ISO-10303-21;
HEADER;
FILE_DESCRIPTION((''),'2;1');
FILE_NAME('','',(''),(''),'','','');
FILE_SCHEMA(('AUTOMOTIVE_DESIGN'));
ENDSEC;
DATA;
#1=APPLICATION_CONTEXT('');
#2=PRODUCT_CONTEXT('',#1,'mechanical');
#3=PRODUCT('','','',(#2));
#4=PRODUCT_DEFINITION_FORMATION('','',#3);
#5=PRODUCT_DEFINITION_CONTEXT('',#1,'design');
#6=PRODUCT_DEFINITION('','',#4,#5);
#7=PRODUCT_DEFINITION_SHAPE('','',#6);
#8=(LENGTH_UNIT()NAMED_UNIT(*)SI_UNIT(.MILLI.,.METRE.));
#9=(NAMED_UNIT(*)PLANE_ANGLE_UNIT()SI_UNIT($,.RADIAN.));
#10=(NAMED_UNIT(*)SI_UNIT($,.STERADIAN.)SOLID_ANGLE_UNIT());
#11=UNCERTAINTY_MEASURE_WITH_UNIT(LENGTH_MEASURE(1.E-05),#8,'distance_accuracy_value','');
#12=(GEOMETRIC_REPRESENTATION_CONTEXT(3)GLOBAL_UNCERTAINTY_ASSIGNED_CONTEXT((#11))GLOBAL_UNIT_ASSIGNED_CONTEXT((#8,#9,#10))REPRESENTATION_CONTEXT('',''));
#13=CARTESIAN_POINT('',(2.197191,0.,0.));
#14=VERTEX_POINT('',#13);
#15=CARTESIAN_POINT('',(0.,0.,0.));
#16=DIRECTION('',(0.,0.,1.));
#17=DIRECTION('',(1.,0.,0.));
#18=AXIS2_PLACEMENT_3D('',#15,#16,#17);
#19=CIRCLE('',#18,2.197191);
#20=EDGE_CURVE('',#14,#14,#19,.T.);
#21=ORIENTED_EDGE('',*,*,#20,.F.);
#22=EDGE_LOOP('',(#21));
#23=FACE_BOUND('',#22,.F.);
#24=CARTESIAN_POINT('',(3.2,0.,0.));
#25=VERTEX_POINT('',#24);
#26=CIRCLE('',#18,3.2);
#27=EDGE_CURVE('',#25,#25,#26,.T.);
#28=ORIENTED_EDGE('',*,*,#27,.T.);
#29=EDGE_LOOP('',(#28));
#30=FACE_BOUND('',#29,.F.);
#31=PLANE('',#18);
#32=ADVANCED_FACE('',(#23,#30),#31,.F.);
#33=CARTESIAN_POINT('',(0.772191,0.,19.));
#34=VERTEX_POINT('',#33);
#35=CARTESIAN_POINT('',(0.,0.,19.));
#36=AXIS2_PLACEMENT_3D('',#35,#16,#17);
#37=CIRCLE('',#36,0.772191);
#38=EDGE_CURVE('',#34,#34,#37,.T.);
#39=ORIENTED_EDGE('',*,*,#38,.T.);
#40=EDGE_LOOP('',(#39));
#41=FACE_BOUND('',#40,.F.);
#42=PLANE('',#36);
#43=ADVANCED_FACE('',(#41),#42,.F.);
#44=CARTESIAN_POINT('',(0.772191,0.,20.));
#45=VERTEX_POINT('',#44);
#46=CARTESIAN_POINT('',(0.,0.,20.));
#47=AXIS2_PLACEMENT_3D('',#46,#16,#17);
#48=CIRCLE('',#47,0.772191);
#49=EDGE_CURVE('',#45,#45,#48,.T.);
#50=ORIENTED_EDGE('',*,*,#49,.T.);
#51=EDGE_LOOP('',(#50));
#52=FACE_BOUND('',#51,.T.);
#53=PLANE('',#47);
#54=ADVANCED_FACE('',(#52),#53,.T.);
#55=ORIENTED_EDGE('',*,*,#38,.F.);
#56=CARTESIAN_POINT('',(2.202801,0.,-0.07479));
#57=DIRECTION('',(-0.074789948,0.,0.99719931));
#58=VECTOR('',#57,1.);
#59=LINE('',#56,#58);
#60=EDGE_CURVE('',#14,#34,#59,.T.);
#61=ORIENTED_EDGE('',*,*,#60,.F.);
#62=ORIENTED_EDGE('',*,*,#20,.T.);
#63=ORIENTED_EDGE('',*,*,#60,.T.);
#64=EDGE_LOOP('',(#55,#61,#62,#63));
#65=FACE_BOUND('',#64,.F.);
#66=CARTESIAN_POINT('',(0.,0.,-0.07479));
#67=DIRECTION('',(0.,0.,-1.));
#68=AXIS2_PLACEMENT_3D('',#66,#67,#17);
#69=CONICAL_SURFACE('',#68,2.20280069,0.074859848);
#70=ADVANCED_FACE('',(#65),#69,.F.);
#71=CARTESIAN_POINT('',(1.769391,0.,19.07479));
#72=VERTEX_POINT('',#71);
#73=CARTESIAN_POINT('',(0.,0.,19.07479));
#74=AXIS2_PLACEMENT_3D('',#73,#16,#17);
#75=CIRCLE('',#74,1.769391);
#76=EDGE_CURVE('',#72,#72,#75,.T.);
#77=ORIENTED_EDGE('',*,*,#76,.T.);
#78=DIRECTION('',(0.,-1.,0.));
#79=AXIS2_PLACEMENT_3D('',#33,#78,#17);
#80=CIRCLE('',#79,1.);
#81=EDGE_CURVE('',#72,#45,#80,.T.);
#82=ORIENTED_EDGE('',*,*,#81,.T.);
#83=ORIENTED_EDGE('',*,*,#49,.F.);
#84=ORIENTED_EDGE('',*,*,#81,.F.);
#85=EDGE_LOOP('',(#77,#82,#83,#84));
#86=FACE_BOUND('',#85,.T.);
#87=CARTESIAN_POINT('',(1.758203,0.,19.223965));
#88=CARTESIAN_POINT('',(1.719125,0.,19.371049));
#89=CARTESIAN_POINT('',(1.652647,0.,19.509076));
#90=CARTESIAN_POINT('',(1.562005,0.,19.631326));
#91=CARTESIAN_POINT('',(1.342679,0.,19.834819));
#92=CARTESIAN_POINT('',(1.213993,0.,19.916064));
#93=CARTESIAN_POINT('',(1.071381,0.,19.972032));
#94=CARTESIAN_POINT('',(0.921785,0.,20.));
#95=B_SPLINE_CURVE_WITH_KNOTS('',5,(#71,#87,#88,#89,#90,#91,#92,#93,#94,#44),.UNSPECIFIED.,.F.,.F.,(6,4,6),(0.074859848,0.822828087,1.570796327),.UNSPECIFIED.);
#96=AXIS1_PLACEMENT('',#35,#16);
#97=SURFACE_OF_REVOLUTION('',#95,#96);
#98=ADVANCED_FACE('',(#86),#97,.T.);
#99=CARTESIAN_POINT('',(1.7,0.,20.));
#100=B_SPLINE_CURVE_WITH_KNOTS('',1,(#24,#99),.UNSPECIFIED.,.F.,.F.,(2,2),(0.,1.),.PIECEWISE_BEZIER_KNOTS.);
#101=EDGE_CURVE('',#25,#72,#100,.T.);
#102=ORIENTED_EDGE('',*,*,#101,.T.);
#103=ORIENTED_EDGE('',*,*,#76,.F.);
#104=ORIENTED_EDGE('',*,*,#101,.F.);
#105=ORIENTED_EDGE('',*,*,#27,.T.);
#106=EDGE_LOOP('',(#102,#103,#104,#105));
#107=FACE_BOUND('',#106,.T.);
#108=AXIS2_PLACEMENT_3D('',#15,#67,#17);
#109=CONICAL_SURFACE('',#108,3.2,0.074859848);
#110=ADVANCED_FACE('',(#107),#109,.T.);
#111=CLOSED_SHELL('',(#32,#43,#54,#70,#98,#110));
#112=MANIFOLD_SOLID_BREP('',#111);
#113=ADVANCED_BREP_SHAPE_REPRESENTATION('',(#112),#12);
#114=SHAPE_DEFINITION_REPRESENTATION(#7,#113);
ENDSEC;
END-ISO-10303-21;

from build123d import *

# Parameters (mm, degrees)
F0_R = 3.2
F2_R = 1.7
F4_T = -1
F5_R = 1


with BuildPart() as f3:
    # F0 (on Top) → F3 section 0
    with BuildSketch(Plane.XY):
        Circle(F0_R)
    # F2 (on offset) → F3 section 1
    with BuildSketch(Plane.XY.offset(20)):
        Circle(F2_R)
    loft()

    # F4
    f4_openings = [f3.faces().sort_by_distance(p)[0] for p in [
        (0, 0, 0),
    ]]
    offset(amount=F4_T, openings=f4_openings, kind=Kind.INTERSECTION)

    # F5
    f5_edges = [f3.edges().sort_by_distance(p)[0] for p in [
        (-1.7, 0, 20),
    ]]
    fillet(f5_edges, radius=F5_R)


solid = f3.part
